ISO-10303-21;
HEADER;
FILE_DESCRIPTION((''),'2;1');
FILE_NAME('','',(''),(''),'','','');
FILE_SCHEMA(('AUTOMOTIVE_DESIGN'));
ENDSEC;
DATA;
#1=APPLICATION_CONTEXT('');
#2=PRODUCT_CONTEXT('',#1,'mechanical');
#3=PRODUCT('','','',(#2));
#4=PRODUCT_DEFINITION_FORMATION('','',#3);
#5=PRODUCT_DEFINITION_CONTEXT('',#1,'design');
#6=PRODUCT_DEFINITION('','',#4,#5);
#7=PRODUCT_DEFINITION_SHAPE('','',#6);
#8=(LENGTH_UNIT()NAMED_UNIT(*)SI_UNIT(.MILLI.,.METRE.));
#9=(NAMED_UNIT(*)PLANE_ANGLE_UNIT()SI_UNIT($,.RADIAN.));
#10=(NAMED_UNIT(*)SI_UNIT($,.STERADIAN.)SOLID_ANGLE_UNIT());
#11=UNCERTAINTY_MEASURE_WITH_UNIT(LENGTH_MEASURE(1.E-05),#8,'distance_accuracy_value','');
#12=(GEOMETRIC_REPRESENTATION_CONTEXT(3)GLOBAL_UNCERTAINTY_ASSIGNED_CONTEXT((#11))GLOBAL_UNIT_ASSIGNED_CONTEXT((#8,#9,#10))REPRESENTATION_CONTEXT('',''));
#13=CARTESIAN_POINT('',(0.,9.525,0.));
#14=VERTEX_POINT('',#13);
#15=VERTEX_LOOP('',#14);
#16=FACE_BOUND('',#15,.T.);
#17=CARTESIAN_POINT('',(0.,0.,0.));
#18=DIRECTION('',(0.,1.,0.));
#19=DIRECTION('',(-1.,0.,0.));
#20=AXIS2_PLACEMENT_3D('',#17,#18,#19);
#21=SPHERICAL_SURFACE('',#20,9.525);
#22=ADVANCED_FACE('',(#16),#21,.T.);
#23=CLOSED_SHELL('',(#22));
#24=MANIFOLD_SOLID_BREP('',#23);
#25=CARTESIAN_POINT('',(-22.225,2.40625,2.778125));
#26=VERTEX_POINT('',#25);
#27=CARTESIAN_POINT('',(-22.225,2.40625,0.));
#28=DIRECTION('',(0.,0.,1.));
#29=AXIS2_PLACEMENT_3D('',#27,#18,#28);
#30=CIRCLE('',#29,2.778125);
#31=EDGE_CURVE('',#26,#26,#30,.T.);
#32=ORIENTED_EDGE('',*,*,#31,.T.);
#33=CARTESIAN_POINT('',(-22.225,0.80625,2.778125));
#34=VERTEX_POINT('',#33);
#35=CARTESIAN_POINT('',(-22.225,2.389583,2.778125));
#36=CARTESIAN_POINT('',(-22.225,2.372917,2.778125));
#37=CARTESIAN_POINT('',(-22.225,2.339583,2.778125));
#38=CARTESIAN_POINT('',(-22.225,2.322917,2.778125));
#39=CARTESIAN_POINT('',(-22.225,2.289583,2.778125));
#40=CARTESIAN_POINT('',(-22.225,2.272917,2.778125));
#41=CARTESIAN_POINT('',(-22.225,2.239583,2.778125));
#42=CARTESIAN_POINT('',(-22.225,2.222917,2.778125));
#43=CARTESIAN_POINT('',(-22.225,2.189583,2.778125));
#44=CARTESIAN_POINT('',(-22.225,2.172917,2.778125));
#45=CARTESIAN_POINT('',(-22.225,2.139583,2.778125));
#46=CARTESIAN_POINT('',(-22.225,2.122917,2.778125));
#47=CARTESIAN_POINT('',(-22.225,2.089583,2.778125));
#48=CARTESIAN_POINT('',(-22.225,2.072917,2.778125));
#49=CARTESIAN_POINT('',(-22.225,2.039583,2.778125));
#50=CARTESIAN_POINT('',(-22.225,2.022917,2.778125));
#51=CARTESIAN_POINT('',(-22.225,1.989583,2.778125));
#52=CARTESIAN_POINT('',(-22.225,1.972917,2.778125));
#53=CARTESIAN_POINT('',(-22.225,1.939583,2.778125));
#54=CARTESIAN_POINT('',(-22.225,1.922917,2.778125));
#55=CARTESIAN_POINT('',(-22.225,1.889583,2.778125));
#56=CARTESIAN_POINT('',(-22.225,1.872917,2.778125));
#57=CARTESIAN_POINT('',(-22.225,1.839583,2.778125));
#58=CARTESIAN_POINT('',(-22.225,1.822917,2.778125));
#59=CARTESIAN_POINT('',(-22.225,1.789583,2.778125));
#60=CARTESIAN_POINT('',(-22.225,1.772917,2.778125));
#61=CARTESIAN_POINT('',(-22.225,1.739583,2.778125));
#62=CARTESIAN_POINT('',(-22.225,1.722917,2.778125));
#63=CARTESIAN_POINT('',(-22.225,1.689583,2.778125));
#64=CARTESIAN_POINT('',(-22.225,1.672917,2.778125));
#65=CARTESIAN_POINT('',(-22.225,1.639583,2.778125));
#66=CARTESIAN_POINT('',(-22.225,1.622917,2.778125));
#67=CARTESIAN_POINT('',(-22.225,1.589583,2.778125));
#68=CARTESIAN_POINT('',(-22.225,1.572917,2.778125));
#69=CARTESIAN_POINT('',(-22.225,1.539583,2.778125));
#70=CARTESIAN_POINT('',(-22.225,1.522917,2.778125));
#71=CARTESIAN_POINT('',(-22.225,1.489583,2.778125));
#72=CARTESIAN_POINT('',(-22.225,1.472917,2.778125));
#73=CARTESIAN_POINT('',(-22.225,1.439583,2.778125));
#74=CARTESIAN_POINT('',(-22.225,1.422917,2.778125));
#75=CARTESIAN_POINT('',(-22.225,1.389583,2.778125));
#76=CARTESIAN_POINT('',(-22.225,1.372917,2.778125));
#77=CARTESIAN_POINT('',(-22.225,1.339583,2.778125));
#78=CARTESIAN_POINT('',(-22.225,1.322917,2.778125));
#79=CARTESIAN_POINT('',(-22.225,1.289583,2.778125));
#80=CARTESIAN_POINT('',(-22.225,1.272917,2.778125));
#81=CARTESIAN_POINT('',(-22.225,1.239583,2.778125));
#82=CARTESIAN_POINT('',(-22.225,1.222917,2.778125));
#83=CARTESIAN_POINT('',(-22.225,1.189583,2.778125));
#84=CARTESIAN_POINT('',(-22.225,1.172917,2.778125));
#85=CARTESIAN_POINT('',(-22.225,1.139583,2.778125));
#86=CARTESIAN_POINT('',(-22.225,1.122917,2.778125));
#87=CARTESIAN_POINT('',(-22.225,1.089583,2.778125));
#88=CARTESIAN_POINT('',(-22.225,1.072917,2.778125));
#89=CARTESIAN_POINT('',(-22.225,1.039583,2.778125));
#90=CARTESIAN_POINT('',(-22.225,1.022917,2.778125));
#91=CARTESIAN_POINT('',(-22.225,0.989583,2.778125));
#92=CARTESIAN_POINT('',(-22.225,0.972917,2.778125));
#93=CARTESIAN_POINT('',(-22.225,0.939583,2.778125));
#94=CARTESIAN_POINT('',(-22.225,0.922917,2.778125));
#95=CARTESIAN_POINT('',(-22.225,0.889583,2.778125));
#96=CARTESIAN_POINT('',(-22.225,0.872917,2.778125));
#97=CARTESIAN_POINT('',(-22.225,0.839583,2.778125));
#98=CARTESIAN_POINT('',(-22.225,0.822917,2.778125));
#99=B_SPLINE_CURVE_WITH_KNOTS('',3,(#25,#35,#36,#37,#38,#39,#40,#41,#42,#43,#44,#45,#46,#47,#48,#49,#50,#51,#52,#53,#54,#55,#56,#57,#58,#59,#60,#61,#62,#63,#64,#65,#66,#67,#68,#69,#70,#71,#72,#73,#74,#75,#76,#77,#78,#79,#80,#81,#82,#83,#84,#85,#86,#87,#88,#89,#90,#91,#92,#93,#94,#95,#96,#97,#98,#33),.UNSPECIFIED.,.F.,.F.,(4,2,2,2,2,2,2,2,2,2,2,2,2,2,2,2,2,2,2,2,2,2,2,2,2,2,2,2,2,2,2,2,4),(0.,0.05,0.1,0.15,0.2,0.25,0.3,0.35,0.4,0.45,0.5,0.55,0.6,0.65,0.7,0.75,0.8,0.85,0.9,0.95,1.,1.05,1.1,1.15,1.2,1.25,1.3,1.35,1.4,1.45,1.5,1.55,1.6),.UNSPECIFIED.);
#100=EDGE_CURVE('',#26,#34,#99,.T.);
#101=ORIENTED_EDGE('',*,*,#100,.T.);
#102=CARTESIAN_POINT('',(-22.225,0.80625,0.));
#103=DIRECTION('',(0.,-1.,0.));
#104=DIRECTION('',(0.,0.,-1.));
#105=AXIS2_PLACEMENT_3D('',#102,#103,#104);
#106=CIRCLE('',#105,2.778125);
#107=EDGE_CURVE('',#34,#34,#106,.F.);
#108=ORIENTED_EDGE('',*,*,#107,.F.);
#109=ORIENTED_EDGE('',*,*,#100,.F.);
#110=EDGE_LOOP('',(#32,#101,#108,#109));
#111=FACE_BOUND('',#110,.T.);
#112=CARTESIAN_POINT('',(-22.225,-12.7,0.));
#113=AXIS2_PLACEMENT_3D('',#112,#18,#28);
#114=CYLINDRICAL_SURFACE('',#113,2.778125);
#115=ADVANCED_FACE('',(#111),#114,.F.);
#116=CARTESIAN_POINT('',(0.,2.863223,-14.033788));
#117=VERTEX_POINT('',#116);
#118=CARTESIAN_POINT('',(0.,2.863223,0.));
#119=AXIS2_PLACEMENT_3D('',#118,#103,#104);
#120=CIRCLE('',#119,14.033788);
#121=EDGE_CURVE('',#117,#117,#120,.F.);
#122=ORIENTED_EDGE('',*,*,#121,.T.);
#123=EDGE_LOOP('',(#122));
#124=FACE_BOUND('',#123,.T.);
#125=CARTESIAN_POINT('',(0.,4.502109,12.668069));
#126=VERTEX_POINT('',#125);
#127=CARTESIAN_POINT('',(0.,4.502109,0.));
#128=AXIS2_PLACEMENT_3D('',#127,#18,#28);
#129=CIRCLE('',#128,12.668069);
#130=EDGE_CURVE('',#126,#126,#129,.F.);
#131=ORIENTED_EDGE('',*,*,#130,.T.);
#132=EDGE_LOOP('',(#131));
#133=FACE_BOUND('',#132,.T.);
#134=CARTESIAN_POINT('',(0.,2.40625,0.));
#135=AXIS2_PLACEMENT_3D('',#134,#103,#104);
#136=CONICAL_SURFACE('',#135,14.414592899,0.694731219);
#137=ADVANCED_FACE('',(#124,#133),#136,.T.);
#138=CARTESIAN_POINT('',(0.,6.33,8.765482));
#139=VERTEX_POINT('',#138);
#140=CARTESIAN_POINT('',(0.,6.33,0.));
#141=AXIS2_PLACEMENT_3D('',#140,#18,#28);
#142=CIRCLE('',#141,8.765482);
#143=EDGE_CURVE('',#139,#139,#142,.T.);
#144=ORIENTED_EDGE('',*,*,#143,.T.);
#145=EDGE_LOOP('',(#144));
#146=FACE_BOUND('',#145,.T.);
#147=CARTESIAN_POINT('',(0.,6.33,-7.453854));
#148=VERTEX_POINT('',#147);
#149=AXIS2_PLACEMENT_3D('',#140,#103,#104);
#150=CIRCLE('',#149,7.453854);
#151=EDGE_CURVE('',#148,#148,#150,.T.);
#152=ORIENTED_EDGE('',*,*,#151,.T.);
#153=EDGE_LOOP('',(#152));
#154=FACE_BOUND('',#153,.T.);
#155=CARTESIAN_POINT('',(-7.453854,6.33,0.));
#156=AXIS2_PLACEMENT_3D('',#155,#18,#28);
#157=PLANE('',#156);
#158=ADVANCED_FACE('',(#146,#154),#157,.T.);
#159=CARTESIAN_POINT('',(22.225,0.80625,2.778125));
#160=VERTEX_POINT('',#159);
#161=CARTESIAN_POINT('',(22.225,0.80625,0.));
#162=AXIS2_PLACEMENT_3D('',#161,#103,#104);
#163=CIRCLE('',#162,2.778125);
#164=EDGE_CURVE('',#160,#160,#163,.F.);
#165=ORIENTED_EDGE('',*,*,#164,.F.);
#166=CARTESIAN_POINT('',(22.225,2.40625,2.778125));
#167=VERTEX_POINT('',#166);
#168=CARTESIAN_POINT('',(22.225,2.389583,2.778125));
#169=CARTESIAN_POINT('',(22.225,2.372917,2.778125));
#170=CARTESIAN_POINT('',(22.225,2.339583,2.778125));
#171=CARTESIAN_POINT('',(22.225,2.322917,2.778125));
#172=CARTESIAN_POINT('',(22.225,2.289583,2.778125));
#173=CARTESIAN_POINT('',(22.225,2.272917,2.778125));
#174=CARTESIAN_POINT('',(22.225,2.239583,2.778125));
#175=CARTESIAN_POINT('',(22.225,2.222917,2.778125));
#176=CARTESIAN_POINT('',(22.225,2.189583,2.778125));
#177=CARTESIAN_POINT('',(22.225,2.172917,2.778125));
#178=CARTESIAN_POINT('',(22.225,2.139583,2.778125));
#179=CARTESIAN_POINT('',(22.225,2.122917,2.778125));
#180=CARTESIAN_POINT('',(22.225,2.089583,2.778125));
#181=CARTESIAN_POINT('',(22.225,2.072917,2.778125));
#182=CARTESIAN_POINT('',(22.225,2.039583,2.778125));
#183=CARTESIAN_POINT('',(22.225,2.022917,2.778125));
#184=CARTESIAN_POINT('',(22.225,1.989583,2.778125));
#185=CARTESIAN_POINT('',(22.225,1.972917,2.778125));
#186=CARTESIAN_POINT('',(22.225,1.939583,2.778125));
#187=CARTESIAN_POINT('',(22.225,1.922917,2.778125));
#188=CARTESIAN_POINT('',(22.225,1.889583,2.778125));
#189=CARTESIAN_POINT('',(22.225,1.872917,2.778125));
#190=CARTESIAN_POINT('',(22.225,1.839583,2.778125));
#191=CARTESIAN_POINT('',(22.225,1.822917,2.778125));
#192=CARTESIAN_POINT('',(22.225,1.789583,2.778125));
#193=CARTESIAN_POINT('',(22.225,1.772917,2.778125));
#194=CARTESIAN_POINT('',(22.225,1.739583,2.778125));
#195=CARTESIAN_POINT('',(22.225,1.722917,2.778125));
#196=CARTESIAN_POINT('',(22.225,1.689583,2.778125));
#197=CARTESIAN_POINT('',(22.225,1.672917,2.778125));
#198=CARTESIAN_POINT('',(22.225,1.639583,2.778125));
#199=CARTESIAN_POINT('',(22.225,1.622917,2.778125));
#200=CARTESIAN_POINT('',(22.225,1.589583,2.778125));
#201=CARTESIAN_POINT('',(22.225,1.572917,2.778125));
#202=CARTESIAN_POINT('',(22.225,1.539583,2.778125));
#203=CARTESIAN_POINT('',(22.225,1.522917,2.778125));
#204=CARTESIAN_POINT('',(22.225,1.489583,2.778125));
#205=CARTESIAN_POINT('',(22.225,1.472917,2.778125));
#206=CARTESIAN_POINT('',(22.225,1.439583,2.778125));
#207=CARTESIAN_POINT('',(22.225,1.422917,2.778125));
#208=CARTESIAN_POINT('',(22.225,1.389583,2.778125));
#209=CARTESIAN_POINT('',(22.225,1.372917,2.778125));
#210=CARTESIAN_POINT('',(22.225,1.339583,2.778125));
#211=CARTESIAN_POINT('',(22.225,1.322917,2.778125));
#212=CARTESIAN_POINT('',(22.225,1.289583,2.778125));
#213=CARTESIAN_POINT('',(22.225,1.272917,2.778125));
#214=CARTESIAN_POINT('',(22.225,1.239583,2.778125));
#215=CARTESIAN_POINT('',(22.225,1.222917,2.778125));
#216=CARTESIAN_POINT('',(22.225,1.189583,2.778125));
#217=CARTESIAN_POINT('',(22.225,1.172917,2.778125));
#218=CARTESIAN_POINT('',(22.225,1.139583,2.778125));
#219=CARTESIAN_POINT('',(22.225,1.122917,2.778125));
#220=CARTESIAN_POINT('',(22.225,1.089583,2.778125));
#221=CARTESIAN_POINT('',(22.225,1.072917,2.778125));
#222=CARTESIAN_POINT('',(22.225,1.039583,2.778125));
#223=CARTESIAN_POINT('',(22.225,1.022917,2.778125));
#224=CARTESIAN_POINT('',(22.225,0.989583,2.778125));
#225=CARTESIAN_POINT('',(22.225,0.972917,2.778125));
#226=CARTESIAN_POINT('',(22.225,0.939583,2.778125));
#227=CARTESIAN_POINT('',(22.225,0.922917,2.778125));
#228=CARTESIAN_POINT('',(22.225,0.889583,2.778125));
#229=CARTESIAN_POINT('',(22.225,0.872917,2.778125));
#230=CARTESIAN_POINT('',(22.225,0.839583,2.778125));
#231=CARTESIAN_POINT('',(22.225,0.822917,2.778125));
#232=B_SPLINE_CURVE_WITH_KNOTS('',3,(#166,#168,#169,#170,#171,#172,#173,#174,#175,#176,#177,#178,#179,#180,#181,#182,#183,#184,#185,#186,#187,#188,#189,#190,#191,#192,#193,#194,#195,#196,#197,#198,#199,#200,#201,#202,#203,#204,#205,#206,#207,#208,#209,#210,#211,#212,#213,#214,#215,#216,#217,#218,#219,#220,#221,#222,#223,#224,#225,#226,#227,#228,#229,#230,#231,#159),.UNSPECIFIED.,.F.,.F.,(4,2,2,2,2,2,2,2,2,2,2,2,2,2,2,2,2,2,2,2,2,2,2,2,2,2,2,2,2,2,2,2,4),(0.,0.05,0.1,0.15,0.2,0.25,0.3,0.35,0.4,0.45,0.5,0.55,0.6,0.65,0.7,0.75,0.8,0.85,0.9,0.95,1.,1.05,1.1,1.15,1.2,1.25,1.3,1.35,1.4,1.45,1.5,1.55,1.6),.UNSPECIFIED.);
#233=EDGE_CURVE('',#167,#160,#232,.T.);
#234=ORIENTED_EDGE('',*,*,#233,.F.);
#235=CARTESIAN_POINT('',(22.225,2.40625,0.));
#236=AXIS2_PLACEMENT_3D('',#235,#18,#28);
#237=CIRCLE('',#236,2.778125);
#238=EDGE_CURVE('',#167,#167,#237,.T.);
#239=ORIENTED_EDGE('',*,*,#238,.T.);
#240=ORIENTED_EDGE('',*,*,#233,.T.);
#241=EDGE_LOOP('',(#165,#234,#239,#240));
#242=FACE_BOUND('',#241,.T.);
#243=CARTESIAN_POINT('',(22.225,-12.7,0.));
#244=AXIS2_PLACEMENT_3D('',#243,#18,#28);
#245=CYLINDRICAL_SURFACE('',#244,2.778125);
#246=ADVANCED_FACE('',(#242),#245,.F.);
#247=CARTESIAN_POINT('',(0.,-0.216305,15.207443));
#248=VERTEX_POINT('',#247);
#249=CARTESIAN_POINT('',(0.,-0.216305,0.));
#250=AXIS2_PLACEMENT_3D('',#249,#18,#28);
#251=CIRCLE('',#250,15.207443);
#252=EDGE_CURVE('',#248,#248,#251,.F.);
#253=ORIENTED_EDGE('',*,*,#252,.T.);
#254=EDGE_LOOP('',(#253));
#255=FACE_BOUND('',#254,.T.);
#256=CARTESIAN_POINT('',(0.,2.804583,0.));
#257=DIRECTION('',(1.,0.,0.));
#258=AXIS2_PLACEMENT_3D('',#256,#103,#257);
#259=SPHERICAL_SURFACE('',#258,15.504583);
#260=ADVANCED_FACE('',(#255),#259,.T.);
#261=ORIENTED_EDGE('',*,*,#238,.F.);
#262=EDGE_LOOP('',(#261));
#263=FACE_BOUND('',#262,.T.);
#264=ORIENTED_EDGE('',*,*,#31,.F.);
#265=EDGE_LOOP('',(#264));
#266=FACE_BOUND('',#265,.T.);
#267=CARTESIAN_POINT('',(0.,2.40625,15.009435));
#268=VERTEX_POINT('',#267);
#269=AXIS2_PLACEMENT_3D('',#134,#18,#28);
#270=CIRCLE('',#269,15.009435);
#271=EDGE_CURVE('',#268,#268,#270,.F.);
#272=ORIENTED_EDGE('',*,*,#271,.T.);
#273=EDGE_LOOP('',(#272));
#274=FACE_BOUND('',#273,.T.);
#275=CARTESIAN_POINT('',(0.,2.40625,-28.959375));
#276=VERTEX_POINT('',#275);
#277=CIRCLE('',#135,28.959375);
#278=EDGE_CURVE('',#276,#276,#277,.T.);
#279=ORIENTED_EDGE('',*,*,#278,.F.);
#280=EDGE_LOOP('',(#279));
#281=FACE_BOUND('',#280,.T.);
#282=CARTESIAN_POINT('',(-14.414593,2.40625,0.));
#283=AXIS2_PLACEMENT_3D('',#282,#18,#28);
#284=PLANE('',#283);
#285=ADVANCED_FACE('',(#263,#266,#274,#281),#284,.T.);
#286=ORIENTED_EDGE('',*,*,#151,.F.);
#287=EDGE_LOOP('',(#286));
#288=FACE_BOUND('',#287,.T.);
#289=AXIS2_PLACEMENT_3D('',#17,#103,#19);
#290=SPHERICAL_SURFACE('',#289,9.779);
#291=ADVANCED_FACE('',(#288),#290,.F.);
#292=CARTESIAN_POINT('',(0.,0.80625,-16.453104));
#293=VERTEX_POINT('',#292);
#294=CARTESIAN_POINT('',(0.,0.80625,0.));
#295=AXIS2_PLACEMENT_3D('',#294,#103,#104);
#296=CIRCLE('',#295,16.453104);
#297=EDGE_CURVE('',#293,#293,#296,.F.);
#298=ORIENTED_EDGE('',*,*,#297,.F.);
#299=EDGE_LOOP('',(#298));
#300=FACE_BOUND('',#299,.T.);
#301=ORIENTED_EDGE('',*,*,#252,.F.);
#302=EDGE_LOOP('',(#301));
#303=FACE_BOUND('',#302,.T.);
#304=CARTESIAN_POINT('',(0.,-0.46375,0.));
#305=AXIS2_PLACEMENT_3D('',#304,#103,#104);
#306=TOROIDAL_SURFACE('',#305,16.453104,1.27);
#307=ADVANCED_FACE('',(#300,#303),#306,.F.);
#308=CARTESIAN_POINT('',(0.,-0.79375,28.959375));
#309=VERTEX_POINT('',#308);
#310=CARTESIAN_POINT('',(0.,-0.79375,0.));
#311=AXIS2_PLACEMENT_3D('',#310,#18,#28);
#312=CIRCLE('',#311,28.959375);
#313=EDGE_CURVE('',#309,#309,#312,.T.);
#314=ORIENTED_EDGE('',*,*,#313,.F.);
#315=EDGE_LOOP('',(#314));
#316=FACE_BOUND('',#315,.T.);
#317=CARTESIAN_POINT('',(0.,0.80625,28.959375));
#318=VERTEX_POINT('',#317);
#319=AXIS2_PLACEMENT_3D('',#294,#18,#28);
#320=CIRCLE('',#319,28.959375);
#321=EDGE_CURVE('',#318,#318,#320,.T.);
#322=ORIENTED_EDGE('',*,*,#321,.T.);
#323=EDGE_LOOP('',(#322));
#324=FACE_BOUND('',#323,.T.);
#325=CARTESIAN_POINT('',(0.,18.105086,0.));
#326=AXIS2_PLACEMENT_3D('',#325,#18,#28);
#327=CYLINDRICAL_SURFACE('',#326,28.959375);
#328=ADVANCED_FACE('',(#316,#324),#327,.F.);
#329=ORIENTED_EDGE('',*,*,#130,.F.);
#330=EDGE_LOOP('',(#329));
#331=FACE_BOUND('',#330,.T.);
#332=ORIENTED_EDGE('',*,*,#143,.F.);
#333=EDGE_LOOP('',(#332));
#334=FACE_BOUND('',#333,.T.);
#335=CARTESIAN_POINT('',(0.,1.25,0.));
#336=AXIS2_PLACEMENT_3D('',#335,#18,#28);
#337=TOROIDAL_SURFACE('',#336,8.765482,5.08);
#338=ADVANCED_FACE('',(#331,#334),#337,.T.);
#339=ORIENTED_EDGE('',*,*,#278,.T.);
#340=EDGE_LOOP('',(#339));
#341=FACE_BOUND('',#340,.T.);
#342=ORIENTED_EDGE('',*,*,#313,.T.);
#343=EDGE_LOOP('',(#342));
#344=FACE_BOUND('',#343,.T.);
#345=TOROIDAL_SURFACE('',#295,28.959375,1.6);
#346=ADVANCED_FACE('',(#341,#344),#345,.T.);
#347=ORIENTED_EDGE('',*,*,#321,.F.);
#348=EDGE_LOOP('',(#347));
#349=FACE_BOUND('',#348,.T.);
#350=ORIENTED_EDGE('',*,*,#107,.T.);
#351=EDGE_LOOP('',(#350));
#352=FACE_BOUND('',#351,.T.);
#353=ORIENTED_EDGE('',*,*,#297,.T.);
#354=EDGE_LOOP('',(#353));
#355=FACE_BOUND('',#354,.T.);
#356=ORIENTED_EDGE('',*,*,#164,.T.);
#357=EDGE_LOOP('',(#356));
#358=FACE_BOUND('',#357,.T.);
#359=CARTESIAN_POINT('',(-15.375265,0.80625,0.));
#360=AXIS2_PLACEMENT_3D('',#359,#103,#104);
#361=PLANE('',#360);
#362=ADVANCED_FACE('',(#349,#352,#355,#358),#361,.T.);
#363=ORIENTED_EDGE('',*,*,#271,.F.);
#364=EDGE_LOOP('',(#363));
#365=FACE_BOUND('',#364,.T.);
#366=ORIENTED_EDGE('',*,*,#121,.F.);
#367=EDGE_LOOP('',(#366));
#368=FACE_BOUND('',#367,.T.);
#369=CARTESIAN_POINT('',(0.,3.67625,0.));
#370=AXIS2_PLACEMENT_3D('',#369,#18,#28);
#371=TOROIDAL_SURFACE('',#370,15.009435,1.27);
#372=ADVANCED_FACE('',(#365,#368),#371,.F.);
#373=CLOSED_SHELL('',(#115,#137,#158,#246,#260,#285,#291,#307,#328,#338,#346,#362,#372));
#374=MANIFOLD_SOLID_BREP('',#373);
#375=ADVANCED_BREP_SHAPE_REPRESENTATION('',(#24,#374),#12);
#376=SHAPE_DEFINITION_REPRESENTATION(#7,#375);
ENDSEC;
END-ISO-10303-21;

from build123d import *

# Parameters (mm, degrees)
SKETCH3_R          = 2.778125
CUT_EXTRUDE1_DEPTH = 46.781542155
FILLET4_R          = 5.08
FILLET5_R          = 1.27


with BuildPart() as part:
    # Sketch1 → Revolve1 (revolve)
    with BuildSketch(Plane.XY, mode=Mode.PRIVATE) as revolve1_sk:
        with BuildLine():
            Line((14.414592899, 2.40625), (28.959375, 2.40625))
            ThreePointArc((28.959375, 2.40625), (30.559375, 0.80625), (28.959375, -0.79375))
            Line((28.959375, -0.79375), (15.08125, -0.79375))
            ThreePointArc((15.08125, -0.79375), (9.607326509, -9.364696912), (0, -12.7))
            Line((0, -12.7), (0, -9.779))
            ThreePointArc((0, -9.779), (8.874962282, -4.106566145), (7.453854104, 6.33))
            Line((7.453854104, 6.33), (11.144848151, 6.33))
            Line((11.144848151, 6.33), (14.414592899, 2.40625))
        make_face()
    revolve(revolve1_sk.sketch.rotate(Axis((0, -12.7, 0), (0, 1, 0)), 90), axis=Axis((0, -12.7, 0), (0, 1, 0)))

    # Sketch3 → Cut-Extrude1 (cut, through all)
    with BuildSketch(Plane(origin=(0, 2.40625, 0), x_dir=(1, 0, 0), z_dir=(0, 1, 0))):
        with Locations(Location((-22.225, 0, 0), (0, 0, 270))):
            Circle(SKETCH3_R)
        with Locations(Location((22.225, 0, 0), (0, 0, 270))):
            Circle(SKETCH3_R)
    extrude(amount=-CUT_EXTRUDE1_DEPTH, mode=Mode.SUBTRACT)

    # Sketch5 → Cut revolve (revolve, cut)
    with BuildSketch(Plane.XY, mode=Mode.PRIVATE) as cut_revolve_sk:
        with BuildLine():
            Line((15.375264818, 0.80625), (28.959375, 0.80625))
            Line((28.959375, 0.80625), (28.959375, -0.79375))
            Line((28.959375, -0.79375), (15.08125, -0.79375))
            ThreePointArc((15.08125, -0.79375), (15.249256497, 0.002391223), (15.375264818, 0.80625))
        make_face()
    revolve(cut_revolve_sk.sketch.rotate(Axis((0, 18.105086034, 0), (0, 1, 0)), 180), axis=Axis((0, 18.105086034, 0), (0, 1, 0)), mode=Mode.SUBTRACT)

    # Fillet4
    fillet4_edges = [part.edges().sort_by_distance(p)[0] for p in [
        (0, 6.33, 11.144848151),
    ]]
    fillet(fillet4_edges, radius=FILLET4_R)

    # Fillet5
    fillet5_edges = [part.edges().sort_by_distance(p)[0] for p in [
        (15.375264818, 0.80625, 0),
        (0, 2.40625, 14.414592899),
    ]]
    fillet(fillet5_edges, radius=FILLET5_R)


with BuildPart() as body_2:
    # Sketch2 → Revolve2 (revolve)
    with BuildSketch(Plane.XY):
        with BuildLine():
            Line((0, 9.525), (0, -9.525))
            ThreePointArc((0, -9.525), (9.525, 0), (0, 9.525))
        make_face()
    revolve(axis=Axis((0, 9.525, 0), (0, -1, 0)))


solid = Compound([part.part, body_2.part])
